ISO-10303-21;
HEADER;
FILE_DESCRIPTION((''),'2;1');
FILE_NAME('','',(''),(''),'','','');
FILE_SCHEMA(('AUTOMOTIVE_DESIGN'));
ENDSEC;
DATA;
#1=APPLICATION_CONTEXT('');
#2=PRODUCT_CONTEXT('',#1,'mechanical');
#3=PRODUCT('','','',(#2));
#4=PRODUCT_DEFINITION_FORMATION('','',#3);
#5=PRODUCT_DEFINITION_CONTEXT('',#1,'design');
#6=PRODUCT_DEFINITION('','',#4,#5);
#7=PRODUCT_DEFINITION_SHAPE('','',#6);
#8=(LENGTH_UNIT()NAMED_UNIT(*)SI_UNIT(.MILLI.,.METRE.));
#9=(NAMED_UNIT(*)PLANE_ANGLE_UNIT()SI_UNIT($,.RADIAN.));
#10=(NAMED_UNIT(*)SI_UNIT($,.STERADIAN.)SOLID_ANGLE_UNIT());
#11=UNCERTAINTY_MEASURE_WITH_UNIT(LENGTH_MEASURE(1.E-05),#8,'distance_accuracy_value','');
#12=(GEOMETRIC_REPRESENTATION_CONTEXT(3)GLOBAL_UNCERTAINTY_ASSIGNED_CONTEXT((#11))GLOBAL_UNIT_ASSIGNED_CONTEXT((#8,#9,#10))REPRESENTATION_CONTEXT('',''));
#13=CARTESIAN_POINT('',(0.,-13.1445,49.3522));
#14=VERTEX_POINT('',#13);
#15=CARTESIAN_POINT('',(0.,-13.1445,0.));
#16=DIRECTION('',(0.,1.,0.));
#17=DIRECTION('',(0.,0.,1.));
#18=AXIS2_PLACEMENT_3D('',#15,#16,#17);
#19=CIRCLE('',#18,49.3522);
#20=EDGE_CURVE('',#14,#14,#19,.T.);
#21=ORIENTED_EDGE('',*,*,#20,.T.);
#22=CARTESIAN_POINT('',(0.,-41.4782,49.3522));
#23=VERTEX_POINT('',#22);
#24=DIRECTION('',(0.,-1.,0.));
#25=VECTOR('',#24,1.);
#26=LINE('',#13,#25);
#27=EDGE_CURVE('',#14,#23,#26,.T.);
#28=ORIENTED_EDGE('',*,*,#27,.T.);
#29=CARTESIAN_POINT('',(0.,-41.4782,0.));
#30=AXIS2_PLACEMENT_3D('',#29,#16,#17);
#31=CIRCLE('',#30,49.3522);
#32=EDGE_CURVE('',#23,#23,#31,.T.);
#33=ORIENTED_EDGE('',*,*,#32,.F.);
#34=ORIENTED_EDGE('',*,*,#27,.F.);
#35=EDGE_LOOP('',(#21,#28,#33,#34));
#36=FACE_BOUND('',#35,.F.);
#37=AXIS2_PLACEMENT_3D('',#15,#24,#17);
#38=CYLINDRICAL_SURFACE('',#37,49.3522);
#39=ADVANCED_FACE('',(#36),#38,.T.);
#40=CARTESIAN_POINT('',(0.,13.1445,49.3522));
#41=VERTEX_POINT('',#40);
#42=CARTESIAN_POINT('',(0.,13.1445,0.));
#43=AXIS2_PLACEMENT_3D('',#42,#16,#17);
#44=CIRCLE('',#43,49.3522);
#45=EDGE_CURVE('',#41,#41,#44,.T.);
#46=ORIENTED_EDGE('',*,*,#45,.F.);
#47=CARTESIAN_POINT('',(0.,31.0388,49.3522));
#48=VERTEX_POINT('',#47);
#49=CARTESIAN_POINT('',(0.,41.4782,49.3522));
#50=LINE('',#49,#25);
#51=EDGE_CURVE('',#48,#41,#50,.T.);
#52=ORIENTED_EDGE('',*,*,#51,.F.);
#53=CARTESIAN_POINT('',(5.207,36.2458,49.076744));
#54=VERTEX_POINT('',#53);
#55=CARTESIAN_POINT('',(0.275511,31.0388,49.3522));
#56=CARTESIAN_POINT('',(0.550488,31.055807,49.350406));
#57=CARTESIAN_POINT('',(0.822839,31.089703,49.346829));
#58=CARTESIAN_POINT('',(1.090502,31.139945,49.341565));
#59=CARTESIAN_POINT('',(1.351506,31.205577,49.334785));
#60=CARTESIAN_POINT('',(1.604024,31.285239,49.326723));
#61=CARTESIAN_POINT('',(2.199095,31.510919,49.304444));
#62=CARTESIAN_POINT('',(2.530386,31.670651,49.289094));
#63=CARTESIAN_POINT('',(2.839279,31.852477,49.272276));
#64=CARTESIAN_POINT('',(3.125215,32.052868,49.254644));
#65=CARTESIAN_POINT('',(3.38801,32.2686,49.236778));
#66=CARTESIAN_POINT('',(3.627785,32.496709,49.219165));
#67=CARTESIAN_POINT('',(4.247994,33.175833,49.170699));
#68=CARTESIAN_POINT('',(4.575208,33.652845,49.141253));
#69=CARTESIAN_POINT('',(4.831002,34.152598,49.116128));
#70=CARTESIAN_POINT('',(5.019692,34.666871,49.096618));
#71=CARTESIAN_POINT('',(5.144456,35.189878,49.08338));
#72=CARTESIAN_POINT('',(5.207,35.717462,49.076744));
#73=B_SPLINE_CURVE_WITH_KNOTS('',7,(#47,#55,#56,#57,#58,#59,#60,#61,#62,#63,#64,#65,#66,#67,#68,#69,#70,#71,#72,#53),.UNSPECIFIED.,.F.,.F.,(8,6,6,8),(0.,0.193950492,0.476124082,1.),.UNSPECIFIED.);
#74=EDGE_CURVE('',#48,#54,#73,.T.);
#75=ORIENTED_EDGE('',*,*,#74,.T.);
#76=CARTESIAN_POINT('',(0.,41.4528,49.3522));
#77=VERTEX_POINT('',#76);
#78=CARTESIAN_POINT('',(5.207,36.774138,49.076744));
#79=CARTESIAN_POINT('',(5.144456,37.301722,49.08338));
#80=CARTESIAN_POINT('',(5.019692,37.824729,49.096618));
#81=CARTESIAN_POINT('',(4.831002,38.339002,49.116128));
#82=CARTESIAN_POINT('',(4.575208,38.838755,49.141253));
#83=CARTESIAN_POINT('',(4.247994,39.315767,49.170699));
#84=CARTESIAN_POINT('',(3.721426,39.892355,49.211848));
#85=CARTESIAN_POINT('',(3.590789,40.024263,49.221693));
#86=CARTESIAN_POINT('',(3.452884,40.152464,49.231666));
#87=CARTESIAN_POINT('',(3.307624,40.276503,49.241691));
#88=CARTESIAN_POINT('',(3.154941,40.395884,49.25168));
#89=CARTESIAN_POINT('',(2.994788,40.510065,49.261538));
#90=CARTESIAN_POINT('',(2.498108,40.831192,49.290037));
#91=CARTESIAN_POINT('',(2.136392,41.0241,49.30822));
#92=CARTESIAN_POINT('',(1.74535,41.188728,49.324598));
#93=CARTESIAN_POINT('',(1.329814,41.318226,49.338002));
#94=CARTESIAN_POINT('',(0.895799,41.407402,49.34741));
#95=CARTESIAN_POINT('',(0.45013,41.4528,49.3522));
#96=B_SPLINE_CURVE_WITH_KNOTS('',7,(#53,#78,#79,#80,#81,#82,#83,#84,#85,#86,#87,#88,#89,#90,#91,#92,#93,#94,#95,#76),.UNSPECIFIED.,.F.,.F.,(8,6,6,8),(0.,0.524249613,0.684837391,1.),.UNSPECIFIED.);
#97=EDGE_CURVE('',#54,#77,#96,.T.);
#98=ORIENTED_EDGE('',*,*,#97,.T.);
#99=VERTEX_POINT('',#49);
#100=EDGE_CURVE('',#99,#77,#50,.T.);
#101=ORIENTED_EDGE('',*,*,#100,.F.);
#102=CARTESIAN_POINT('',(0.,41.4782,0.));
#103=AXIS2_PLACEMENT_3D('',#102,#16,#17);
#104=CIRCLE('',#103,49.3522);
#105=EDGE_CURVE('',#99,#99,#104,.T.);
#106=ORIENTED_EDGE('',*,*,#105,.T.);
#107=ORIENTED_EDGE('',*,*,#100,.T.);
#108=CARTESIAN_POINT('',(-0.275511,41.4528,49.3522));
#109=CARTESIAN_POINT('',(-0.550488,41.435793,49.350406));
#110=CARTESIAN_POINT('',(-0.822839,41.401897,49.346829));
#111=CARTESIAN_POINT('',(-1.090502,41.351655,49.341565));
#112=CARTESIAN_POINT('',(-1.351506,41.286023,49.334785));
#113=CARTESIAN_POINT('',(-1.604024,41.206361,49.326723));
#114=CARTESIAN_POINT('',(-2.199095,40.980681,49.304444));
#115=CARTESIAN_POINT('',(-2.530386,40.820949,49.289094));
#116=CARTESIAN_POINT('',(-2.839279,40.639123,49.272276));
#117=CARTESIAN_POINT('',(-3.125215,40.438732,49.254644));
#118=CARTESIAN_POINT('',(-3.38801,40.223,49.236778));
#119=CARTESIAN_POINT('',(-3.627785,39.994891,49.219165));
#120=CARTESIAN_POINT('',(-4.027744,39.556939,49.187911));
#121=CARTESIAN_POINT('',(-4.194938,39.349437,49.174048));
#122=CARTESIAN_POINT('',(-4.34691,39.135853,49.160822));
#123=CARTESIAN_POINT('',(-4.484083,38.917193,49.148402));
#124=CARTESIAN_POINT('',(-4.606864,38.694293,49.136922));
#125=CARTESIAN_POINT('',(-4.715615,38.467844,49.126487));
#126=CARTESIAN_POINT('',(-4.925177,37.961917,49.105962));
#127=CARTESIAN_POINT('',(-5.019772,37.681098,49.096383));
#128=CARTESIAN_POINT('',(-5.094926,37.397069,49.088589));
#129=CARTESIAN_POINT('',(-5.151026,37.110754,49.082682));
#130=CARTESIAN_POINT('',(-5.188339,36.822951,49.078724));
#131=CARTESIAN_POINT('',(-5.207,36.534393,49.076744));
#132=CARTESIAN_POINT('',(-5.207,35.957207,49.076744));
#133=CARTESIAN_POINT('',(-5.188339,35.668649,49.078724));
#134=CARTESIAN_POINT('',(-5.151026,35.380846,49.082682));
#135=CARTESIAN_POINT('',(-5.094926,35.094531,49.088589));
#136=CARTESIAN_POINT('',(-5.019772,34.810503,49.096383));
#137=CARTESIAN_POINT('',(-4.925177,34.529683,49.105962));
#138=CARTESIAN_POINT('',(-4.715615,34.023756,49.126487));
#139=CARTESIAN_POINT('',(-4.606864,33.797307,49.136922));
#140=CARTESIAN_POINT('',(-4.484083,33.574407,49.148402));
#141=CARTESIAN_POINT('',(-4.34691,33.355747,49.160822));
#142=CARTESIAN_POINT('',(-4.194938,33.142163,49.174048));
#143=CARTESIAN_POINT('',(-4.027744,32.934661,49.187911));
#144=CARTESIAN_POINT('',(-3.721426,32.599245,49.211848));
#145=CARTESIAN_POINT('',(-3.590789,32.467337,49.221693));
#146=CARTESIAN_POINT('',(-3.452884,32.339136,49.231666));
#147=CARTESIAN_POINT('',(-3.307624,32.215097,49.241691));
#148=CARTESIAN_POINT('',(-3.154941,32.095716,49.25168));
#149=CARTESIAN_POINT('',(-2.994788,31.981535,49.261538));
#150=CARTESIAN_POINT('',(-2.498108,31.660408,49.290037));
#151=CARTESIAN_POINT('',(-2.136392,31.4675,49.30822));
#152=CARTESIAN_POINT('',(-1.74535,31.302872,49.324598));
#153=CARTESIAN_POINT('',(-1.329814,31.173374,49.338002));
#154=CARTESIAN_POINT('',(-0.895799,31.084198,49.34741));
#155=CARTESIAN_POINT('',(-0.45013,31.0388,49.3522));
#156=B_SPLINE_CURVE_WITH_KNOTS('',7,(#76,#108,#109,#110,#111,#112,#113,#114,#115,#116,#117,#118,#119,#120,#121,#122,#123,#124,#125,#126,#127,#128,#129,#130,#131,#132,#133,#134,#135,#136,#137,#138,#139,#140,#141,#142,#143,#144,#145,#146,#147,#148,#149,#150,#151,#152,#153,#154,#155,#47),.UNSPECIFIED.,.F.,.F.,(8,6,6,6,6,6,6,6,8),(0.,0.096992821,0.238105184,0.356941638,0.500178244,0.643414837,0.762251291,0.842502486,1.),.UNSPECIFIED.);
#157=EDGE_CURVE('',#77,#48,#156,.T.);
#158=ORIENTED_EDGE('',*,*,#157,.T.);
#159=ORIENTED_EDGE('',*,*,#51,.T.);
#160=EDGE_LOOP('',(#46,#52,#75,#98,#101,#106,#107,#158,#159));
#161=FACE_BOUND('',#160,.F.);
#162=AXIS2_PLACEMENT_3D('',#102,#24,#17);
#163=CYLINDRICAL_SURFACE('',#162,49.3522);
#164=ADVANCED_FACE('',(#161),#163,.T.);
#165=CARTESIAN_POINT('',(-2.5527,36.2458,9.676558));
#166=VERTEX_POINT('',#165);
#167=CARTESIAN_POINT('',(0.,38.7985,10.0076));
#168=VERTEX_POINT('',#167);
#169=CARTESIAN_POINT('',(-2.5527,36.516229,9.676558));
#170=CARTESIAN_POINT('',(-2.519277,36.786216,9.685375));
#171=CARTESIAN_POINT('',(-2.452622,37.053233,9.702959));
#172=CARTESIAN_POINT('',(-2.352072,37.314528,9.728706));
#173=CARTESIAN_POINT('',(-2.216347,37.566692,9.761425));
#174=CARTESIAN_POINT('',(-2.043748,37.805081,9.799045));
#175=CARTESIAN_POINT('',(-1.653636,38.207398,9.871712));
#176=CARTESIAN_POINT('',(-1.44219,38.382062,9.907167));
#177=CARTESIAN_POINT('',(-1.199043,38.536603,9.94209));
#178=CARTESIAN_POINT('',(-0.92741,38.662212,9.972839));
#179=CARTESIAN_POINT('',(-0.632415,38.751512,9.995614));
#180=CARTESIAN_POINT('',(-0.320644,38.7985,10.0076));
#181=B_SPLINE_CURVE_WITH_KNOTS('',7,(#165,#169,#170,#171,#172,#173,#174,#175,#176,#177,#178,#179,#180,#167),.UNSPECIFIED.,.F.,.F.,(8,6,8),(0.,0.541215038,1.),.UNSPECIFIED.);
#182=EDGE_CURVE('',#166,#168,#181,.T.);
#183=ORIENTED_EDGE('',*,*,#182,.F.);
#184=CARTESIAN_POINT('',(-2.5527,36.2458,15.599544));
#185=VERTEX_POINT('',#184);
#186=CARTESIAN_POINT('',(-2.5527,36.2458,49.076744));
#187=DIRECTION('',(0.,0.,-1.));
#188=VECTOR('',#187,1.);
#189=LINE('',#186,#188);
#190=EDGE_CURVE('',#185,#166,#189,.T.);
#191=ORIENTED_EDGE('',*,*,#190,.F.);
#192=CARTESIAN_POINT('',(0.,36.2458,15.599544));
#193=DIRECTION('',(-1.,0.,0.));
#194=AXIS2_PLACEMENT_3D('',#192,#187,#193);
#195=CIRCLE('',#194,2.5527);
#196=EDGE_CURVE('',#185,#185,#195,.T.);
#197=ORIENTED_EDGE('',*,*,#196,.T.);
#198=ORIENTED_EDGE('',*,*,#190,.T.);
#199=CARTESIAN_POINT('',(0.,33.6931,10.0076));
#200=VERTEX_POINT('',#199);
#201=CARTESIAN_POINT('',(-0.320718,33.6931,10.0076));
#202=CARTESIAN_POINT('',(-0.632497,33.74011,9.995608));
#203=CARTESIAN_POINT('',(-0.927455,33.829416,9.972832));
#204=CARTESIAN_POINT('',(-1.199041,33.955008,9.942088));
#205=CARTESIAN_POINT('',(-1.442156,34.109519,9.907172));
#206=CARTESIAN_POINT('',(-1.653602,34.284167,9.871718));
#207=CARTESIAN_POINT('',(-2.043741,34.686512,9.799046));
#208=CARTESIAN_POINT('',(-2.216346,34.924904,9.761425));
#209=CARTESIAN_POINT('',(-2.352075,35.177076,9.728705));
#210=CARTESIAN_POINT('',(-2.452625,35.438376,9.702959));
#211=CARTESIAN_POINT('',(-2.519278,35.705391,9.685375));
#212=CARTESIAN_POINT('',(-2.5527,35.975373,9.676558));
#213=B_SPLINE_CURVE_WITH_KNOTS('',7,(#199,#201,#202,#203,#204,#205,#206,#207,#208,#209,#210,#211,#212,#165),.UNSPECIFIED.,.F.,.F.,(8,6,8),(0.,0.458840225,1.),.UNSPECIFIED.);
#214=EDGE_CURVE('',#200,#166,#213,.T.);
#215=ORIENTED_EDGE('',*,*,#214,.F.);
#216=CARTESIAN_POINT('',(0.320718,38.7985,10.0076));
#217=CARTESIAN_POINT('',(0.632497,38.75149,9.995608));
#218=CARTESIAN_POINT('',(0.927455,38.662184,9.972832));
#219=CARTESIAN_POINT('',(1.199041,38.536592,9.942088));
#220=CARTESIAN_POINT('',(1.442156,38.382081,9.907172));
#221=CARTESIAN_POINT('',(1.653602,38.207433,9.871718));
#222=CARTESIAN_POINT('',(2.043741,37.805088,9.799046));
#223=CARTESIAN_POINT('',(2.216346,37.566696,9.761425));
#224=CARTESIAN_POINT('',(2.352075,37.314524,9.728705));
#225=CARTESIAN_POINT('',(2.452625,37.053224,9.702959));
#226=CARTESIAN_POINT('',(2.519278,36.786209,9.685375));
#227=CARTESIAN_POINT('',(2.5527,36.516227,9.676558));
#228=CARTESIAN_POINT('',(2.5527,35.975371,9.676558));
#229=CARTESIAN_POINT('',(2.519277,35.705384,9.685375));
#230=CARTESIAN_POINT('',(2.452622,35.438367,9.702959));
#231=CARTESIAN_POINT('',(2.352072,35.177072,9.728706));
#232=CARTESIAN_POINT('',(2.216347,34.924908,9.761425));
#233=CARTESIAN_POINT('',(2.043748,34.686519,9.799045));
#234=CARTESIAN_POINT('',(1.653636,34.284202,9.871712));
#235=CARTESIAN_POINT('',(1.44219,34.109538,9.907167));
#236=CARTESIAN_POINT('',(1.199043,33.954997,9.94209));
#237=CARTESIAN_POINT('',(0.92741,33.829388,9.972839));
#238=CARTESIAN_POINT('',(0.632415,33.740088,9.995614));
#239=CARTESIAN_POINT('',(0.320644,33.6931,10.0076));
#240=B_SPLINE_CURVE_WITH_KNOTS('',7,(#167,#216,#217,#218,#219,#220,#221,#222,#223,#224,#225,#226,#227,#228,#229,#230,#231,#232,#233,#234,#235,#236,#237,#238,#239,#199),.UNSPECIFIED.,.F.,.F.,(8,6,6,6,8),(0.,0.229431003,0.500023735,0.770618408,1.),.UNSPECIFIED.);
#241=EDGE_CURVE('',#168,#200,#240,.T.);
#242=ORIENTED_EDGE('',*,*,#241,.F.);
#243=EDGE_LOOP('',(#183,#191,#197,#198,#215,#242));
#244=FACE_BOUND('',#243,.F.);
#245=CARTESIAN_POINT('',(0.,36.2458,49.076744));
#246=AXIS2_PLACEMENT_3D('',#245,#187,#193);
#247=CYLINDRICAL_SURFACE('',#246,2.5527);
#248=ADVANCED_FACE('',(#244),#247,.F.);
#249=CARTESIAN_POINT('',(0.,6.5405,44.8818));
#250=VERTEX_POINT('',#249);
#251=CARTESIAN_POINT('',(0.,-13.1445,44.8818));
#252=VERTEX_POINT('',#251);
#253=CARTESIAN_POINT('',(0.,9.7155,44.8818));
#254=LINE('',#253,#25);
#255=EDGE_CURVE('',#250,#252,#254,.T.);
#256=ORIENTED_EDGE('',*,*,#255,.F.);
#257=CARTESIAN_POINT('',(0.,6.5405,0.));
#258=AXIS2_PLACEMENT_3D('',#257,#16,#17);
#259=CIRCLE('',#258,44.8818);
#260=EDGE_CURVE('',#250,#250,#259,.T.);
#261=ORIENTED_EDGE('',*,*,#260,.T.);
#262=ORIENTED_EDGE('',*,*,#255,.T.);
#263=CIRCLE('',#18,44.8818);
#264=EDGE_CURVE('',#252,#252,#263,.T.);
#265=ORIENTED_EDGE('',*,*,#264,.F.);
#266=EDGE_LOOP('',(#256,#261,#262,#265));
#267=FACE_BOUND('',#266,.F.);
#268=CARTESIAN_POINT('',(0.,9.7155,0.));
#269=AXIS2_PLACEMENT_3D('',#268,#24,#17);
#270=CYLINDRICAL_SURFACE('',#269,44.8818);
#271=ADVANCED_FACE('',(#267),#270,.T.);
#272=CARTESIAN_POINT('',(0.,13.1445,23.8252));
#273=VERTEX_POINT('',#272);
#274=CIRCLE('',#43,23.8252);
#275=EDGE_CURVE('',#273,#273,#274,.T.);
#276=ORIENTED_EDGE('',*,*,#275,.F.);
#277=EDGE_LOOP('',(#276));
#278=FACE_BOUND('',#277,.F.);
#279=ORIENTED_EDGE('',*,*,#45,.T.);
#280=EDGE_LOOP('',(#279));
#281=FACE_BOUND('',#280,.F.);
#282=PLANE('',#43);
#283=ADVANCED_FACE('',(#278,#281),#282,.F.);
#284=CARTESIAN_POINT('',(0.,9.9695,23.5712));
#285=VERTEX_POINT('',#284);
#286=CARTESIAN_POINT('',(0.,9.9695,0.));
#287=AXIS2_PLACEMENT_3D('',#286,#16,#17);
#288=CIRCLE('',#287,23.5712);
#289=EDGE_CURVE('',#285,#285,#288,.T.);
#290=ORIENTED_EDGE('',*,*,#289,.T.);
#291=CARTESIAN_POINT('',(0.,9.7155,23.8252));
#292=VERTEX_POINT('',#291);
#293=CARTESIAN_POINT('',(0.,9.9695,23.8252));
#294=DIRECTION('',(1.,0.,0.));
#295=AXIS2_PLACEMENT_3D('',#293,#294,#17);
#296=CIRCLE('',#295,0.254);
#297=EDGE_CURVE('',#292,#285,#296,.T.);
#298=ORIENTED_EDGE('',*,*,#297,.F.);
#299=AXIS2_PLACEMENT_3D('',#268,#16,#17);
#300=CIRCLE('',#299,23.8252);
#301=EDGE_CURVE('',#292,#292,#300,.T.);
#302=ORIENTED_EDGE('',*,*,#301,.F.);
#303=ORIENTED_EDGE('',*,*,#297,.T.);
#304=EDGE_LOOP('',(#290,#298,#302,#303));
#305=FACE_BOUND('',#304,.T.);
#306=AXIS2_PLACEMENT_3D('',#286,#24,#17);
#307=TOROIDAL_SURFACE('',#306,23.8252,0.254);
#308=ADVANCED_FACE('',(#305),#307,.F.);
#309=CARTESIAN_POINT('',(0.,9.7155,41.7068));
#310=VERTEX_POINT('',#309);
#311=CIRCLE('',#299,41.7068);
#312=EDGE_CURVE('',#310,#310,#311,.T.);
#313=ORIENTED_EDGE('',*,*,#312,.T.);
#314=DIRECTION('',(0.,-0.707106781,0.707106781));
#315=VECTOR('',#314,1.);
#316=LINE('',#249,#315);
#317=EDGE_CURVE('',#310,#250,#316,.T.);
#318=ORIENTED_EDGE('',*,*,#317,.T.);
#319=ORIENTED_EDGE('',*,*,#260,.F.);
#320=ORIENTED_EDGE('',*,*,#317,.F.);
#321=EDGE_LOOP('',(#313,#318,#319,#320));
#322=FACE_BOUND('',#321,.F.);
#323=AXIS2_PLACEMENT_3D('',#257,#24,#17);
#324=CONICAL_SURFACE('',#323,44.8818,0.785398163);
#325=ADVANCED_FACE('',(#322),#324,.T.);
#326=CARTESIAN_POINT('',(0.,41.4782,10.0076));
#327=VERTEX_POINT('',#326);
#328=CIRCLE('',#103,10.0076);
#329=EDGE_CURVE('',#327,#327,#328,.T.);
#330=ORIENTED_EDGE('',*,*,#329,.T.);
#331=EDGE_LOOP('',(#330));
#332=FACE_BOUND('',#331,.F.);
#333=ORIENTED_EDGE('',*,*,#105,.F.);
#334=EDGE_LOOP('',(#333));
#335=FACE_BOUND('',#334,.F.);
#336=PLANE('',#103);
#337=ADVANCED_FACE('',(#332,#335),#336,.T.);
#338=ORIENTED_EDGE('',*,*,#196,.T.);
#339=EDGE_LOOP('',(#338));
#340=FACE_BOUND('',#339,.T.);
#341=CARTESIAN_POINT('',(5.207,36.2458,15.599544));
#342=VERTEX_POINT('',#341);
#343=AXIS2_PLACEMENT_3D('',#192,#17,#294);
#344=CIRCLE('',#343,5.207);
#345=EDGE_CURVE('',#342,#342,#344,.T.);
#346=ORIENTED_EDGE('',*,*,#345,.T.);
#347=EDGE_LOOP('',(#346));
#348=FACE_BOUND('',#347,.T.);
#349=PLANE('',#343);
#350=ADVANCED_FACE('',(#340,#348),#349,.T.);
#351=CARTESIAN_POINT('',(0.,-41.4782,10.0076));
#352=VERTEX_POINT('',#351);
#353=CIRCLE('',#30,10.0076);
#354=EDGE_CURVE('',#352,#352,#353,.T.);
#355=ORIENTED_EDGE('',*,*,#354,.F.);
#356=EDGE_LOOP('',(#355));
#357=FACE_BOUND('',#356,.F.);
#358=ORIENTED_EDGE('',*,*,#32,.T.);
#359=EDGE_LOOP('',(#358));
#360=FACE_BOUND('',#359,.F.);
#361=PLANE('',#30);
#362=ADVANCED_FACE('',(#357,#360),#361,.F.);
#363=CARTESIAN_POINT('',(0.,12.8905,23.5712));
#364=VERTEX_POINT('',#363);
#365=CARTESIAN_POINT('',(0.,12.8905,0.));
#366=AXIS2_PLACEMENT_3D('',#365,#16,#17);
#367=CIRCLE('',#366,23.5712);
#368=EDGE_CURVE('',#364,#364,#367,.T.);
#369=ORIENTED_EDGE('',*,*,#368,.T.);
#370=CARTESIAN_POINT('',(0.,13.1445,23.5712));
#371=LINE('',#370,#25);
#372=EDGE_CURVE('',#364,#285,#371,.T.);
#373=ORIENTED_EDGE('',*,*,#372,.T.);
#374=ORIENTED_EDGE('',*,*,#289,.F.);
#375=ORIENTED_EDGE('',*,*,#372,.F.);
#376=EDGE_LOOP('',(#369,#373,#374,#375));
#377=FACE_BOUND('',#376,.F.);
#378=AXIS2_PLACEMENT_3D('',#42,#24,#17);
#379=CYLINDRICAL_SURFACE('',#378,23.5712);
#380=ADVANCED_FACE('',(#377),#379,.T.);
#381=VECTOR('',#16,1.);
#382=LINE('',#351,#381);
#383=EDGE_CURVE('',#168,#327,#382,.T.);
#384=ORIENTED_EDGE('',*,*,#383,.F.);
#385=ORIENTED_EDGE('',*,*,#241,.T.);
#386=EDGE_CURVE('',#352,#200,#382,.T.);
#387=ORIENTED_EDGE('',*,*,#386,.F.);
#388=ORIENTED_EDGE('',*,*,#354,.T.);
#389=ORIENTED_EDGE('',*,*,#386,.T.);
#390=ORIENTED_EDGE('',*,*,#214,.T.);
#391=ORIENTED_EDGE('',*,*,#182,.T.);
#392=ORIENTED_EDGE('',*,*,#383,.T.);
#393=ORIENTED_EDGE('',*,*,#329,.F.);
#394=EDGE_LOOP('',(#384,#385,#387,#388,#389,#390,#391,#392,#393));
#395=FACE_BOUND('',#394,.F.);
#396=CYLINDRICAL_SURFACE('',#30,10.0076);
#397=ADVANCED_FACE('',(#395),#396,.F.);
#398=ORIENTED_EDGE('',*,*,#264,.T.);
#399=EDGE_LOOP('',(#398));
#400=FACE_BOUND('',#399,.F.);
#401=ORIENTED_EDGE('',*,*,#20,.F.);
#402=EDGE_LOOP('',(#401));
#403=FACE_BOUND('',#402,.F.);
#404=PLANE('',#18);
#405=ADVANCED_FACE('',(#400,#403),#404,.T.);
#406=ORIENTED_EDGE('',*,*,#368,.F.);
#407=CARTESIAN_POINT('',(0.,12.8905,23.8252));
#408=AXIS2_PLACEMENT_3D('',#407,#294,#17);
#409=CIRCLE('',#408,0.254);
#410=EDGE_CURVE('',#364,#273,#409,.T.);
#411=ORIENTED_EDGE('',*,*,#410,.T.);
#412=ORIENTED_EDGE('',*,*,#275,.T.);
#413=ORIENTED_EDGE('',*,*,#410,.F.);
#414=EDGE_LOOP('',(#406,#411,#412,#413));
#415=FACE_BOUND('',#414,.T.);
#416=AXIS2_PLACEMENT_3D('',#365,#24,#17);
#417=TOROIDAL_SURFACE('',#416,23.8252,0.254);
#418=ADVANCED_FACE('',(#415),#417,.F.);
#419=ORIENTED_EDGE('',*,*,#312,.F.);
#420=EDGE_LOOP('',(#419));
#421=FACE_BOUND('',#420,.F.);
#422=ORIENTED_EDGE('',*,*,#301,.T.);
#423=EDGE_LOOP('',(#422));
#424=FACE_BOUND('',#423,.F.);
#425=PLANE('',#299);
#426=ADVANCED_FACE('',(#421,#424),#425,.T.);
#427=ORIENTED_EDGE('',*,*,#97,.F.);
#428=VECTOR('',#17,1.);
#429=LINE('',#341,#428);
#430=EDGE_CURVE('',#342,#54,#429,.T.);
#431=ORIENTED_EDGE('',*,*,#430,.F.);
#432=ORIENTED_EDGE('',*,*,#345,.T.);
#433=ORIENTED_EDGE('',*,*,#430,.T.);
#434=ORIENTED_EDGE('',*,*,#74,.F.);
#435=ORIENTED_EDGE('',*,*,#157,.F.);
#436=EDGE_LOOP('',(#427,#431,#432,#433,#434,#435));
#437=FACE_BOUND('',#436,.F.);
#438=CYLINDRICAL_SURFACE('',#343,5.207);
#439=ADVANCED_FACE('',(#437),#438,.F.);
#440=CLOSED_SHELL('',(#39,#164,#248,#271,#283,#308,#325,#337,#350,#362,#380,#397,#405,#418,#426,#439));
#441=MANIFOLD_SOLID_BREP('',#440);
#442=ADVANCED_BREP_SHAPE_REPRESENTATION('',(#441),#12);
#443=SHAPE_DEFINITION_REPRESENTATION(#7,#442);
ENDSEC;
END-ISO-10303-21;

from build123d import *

# Parameters (mm, degrees)
F2_SIZE        = 3.175
F3_R           = 0.254
F6_D           = 5.1054
F6_DEPTH       = 49.3522
F6_START       = 0.2754562
F6_CBORE_D     = 10.414
F6_CBORE_DEPTH = 33.4772
F6_TIP         = 1.5338169022


# Not quite as in the source:
# - a feature names something its author has since deleted; it is built from what else it names


with BuildPart() as f1:
    # F0 (on Right) → F1 (revolve)
    with BuildSketch(Plane.YZ):
        Polygon((-41.4782, 10.0076), (0, 10.0076), (41.4782, 10.0076), (41.4782, 49.3522), (13.1445, 49.3522), (13.1445, 23.5712), (9.7155, 23.5712), (9.7155, 44.8818), (-13.1445, 44.8818), (-13.1445, 49.3522), (-41.4782, 49.3522), align=None)
    revolve(axis=Axis((0, -0.9843776588, 0), (0, 1, 0)))

    # F2
    f2_edges = [f1.edges().sort_by_distance(p)[0] for p in [
        (0, 9.7155, -44.8818),
    ]]
    chamfer(f2_edges, length=F2_SIZE)

    # F3
    f3_edges = [f1.edges().sort_by_distance(p)[0] for p in [
        (0, 9.7155, -23.5712),
        (0, 13.1445, -23.5712),
    ]]
    fillet(f3_edges, radius=F3_R)

    # F6
    # its depths count from where the whole tool has entered the part; down to there all is cleared
    with Locations(Plane.XY.offset(49.3522).offset(-F6_START)):
        with Locations((0, 36.2458)):
            CounterBoreHole(F6_D / 2, F6_CBORE_D / 2, F6_CBORE_DEPTH, depth=F6_DEPTH)
            with Locations((0, 0, -(F6_DEPTH + F6_TIP / 2))):  # 118° drill point
                Cone(0, F6_D / 2, F6_TIP, mode=Mode.SUBTRACT)


solid = f1.part
